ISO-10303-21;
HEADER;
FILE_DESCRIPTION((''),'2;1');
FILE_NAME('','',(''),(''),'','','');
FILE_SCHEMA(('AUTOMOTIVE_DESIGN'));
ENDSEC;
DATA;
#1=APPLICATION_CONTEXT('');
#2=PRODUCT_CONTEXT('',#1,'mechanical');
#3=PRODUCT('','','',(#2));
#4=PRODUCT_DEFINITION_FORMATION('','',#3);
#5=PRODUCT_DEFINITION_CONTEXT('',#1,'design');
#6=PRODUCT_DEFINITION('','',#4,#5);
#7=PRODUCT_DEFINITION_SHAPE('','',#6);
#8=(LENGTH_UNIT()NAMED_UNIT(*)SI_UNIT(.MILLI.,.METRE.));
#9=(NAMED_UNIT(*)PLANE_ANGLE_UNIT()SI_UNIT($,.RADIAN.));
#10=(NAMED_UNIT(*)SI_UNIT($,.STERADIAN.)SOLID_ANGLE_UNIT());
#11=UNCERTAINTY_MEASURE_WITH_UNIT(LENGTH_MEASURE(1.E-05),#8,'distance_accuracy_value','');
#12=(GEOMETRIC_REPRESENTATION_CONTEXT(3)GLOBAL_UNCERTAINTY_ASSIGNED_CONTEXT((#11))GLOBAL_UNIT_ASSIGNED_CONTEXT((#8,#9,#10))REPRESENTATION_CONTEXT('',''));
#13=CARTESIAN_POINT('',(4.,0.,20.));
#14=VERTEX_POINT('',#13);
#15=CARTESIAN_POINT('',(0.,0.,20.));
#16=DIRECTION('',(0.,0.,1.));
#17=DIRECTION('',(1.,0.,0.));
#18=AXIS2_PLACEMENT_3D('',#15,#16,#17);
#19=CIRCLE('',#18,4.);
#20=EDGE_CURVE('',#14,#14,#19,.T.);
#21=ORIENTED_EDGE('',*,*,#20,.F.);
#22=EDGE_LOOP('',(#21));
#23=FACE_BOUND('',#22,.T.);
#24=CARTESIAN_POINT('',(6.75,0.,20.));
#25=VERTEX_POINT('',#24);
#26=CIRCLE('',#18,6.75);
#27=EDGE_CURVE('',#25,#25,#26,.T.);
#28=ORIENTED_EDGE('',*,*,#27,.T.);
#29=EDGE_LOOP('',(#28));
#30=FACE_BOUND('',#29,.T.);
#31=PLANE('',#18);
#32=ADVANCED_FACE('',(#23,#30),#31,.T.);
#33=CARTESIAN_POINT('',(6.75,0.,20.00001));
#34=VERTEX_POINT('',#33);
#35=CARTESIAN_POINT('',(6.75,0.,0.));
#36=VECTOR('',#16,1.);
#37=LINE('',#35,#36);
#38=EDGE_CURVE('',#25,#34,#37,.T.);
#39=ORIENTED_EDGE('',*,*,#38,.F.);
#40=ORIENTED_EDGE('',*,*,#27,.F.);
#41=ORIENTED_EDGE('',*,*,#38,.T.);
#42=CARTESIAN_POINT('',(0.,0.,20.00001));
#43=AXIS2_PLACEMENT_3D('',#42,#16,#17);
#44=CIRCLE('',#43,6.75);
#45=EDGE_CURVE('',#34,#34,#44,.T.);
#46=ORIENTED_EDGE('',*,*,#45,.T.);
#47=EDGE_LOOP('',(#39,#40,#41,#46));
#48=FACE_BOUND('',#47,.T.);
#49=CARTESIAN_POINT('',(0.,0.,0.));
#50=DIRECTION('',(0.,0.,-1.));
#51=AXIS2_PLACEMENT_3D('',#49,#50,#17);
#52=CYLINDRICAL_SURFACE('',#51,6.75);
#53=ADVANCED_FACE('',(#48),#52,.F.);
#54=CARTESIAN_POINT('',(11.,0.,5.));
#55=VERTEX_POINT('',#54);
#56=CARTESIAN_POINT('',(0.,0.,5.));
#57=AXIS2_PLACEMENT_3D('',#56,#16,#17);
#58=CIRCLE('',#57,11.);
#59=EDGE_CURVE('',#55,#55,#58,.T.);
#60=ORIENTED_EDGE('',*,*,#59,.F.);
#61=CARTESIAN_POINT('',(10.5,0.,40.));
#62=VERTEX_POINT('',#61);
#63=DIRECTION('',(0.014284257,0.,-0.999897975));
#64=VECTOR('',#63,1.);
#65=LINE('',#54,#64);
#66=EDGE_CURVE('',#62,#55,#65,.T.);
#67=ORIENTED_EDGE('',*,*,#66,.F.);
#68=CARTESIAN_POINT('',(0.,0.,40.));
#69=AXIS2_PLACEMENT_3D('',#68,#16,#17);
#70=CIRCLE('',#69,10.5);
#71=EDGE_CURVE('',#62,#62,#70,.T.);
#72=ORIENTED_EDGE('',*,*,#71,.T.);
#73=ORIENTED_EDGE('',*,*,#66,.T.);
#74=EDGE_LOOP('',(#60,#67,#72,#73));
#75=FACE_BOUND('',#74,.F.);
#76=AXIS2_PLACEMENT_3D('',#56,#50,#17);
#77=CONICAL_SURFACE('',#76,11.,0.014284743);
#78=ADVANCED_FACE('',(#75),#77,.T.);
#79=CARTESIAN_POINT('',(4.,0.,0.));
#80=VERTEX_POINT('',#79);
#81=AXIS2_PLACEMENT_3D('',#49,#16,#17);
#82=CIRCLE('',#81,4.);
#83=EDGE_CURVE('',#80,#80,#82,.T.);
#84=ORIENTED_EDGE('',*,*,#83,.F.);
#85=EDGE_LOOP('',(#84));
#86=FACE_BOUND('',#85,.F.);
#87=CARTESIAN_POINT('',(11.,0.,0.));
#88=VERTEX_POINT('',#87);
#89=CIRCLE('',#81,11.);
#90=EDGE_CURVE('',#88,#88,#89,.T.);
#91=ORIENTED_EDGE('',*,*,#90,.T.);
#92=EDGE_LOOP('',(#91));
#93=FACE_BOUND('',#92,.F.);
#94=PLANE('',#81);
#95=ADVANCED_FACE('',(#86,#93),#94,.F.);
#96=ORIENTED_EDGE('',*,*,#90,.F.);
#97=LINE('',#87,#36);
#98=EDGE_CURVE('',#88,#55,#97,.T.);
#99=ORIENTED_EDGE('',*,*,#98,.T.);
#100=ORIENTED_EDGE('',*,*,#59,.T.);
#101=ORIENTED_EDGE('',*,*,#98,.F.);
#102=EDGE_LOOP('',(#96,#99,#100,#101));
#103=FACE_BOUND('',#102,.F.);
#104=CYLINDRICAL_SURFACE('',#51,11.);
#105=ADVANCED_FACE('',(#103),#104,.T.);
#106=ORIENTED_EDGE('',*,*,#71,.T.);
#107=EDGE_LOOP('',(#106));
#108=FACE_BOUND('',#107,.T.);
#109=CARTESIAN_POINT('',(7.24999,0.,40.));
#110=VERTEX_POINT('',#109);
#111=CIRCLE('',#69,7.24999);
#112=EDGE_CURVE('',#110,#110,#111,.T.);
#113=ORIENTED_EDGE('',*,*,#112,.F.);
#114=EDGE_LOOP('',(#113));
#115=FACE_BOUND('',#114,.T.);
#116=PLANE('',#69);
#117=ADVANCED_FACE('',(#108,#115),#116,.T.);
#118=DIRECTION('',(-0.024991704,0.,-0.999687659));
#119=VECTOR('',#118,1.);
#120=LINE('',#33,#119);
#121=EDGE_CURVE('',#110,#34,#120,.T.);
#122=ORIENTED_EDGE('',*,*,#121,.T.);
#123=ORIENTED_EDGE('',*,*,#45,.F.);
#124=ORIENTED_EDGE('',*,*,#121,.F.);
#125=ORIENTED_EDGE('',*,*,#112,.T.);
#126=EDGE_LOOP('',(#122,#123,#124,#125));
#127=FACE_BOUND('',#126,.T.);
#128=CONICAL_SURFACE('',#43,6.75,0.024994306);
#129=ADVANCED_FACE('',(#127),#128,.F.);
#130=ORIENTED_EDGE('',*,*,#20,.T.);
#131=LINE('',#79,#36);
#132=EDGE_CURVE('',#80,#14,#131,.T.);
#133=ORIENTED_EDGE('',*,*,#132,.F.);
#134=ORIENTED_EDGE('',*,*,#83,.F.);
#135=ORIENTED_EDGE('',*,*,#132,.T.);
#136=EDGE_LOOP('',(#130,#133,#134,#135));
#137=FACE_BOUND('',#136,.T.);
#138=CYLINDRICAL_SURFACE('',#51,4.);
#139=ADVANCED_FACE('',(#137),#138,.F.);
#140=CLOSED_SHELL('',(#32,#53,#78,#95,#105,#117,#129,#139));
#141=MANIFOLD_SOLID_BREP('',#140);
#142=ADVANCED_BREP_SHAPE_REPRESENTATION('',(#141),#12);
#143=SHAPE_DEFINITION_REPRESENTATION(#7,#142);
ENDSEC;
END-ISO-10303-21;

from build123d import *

# Parameters (mm, degrees)
F0_R     = 11
F0_R_2   = 6.75
F1_DEPTH = 40
F0_R_3   = 4
F2_DEPTH = 20
F3_SIZE2 = 19.99999
F3_SIZE  = 0.49999
F4_SIZE2 = 35
F4_SIZE  = 0.5


# Not quite as in the source:
# - a fillet or chamfer is up to 0.001 mm smaller than in the source, because OpenCascade refuses the exact size


with BuildPart() as f1:
    # F0 (on Top) → F1 (new body)
    with BuildSketch(Plane.XY):
        Circle(F0_R)
        Circle(F0_R_2, mode=Mode.SUBTRACT)
    extrude(amount=F1_DEPTH)

    # F0 (on Top) → F2 (join)
    with BuildSketch(Plane.XY):
        Circle(F0_R_2)
        Circle(F0_R_3, mode=Mode.SUBTRACT)
    extrude(amount=F2_DEPTH)

    # F3 (size 0.5 and 20 in the source; OpenCascade refuses exactly that, so slightly less here)
    f3_edges = [f1.edges().sort_by_distance(p)[0] for p in [
        (-6.75, 0, 40),
    ]]
    f3_side = f1.faces().sort_by_distance((-10.688873, 0, 40))[0]
    chamfer(f3_edges, length=F3_SIZE, length2=F3_SIZE2, reference=f3_side)

    # F4
    f4_edges = [f1.edges().sort_by_distance(p)[0] for p in [
        (-11, 0, 40),
    ]]
    f4_side = f1.faces().sort_by_distance((-7.561117, 0, 40))[0]
    chamfer(f4_edges, length=F4_SIZE, length2=F4_SIZE2, reference=f4_side)


solid = f1.part
